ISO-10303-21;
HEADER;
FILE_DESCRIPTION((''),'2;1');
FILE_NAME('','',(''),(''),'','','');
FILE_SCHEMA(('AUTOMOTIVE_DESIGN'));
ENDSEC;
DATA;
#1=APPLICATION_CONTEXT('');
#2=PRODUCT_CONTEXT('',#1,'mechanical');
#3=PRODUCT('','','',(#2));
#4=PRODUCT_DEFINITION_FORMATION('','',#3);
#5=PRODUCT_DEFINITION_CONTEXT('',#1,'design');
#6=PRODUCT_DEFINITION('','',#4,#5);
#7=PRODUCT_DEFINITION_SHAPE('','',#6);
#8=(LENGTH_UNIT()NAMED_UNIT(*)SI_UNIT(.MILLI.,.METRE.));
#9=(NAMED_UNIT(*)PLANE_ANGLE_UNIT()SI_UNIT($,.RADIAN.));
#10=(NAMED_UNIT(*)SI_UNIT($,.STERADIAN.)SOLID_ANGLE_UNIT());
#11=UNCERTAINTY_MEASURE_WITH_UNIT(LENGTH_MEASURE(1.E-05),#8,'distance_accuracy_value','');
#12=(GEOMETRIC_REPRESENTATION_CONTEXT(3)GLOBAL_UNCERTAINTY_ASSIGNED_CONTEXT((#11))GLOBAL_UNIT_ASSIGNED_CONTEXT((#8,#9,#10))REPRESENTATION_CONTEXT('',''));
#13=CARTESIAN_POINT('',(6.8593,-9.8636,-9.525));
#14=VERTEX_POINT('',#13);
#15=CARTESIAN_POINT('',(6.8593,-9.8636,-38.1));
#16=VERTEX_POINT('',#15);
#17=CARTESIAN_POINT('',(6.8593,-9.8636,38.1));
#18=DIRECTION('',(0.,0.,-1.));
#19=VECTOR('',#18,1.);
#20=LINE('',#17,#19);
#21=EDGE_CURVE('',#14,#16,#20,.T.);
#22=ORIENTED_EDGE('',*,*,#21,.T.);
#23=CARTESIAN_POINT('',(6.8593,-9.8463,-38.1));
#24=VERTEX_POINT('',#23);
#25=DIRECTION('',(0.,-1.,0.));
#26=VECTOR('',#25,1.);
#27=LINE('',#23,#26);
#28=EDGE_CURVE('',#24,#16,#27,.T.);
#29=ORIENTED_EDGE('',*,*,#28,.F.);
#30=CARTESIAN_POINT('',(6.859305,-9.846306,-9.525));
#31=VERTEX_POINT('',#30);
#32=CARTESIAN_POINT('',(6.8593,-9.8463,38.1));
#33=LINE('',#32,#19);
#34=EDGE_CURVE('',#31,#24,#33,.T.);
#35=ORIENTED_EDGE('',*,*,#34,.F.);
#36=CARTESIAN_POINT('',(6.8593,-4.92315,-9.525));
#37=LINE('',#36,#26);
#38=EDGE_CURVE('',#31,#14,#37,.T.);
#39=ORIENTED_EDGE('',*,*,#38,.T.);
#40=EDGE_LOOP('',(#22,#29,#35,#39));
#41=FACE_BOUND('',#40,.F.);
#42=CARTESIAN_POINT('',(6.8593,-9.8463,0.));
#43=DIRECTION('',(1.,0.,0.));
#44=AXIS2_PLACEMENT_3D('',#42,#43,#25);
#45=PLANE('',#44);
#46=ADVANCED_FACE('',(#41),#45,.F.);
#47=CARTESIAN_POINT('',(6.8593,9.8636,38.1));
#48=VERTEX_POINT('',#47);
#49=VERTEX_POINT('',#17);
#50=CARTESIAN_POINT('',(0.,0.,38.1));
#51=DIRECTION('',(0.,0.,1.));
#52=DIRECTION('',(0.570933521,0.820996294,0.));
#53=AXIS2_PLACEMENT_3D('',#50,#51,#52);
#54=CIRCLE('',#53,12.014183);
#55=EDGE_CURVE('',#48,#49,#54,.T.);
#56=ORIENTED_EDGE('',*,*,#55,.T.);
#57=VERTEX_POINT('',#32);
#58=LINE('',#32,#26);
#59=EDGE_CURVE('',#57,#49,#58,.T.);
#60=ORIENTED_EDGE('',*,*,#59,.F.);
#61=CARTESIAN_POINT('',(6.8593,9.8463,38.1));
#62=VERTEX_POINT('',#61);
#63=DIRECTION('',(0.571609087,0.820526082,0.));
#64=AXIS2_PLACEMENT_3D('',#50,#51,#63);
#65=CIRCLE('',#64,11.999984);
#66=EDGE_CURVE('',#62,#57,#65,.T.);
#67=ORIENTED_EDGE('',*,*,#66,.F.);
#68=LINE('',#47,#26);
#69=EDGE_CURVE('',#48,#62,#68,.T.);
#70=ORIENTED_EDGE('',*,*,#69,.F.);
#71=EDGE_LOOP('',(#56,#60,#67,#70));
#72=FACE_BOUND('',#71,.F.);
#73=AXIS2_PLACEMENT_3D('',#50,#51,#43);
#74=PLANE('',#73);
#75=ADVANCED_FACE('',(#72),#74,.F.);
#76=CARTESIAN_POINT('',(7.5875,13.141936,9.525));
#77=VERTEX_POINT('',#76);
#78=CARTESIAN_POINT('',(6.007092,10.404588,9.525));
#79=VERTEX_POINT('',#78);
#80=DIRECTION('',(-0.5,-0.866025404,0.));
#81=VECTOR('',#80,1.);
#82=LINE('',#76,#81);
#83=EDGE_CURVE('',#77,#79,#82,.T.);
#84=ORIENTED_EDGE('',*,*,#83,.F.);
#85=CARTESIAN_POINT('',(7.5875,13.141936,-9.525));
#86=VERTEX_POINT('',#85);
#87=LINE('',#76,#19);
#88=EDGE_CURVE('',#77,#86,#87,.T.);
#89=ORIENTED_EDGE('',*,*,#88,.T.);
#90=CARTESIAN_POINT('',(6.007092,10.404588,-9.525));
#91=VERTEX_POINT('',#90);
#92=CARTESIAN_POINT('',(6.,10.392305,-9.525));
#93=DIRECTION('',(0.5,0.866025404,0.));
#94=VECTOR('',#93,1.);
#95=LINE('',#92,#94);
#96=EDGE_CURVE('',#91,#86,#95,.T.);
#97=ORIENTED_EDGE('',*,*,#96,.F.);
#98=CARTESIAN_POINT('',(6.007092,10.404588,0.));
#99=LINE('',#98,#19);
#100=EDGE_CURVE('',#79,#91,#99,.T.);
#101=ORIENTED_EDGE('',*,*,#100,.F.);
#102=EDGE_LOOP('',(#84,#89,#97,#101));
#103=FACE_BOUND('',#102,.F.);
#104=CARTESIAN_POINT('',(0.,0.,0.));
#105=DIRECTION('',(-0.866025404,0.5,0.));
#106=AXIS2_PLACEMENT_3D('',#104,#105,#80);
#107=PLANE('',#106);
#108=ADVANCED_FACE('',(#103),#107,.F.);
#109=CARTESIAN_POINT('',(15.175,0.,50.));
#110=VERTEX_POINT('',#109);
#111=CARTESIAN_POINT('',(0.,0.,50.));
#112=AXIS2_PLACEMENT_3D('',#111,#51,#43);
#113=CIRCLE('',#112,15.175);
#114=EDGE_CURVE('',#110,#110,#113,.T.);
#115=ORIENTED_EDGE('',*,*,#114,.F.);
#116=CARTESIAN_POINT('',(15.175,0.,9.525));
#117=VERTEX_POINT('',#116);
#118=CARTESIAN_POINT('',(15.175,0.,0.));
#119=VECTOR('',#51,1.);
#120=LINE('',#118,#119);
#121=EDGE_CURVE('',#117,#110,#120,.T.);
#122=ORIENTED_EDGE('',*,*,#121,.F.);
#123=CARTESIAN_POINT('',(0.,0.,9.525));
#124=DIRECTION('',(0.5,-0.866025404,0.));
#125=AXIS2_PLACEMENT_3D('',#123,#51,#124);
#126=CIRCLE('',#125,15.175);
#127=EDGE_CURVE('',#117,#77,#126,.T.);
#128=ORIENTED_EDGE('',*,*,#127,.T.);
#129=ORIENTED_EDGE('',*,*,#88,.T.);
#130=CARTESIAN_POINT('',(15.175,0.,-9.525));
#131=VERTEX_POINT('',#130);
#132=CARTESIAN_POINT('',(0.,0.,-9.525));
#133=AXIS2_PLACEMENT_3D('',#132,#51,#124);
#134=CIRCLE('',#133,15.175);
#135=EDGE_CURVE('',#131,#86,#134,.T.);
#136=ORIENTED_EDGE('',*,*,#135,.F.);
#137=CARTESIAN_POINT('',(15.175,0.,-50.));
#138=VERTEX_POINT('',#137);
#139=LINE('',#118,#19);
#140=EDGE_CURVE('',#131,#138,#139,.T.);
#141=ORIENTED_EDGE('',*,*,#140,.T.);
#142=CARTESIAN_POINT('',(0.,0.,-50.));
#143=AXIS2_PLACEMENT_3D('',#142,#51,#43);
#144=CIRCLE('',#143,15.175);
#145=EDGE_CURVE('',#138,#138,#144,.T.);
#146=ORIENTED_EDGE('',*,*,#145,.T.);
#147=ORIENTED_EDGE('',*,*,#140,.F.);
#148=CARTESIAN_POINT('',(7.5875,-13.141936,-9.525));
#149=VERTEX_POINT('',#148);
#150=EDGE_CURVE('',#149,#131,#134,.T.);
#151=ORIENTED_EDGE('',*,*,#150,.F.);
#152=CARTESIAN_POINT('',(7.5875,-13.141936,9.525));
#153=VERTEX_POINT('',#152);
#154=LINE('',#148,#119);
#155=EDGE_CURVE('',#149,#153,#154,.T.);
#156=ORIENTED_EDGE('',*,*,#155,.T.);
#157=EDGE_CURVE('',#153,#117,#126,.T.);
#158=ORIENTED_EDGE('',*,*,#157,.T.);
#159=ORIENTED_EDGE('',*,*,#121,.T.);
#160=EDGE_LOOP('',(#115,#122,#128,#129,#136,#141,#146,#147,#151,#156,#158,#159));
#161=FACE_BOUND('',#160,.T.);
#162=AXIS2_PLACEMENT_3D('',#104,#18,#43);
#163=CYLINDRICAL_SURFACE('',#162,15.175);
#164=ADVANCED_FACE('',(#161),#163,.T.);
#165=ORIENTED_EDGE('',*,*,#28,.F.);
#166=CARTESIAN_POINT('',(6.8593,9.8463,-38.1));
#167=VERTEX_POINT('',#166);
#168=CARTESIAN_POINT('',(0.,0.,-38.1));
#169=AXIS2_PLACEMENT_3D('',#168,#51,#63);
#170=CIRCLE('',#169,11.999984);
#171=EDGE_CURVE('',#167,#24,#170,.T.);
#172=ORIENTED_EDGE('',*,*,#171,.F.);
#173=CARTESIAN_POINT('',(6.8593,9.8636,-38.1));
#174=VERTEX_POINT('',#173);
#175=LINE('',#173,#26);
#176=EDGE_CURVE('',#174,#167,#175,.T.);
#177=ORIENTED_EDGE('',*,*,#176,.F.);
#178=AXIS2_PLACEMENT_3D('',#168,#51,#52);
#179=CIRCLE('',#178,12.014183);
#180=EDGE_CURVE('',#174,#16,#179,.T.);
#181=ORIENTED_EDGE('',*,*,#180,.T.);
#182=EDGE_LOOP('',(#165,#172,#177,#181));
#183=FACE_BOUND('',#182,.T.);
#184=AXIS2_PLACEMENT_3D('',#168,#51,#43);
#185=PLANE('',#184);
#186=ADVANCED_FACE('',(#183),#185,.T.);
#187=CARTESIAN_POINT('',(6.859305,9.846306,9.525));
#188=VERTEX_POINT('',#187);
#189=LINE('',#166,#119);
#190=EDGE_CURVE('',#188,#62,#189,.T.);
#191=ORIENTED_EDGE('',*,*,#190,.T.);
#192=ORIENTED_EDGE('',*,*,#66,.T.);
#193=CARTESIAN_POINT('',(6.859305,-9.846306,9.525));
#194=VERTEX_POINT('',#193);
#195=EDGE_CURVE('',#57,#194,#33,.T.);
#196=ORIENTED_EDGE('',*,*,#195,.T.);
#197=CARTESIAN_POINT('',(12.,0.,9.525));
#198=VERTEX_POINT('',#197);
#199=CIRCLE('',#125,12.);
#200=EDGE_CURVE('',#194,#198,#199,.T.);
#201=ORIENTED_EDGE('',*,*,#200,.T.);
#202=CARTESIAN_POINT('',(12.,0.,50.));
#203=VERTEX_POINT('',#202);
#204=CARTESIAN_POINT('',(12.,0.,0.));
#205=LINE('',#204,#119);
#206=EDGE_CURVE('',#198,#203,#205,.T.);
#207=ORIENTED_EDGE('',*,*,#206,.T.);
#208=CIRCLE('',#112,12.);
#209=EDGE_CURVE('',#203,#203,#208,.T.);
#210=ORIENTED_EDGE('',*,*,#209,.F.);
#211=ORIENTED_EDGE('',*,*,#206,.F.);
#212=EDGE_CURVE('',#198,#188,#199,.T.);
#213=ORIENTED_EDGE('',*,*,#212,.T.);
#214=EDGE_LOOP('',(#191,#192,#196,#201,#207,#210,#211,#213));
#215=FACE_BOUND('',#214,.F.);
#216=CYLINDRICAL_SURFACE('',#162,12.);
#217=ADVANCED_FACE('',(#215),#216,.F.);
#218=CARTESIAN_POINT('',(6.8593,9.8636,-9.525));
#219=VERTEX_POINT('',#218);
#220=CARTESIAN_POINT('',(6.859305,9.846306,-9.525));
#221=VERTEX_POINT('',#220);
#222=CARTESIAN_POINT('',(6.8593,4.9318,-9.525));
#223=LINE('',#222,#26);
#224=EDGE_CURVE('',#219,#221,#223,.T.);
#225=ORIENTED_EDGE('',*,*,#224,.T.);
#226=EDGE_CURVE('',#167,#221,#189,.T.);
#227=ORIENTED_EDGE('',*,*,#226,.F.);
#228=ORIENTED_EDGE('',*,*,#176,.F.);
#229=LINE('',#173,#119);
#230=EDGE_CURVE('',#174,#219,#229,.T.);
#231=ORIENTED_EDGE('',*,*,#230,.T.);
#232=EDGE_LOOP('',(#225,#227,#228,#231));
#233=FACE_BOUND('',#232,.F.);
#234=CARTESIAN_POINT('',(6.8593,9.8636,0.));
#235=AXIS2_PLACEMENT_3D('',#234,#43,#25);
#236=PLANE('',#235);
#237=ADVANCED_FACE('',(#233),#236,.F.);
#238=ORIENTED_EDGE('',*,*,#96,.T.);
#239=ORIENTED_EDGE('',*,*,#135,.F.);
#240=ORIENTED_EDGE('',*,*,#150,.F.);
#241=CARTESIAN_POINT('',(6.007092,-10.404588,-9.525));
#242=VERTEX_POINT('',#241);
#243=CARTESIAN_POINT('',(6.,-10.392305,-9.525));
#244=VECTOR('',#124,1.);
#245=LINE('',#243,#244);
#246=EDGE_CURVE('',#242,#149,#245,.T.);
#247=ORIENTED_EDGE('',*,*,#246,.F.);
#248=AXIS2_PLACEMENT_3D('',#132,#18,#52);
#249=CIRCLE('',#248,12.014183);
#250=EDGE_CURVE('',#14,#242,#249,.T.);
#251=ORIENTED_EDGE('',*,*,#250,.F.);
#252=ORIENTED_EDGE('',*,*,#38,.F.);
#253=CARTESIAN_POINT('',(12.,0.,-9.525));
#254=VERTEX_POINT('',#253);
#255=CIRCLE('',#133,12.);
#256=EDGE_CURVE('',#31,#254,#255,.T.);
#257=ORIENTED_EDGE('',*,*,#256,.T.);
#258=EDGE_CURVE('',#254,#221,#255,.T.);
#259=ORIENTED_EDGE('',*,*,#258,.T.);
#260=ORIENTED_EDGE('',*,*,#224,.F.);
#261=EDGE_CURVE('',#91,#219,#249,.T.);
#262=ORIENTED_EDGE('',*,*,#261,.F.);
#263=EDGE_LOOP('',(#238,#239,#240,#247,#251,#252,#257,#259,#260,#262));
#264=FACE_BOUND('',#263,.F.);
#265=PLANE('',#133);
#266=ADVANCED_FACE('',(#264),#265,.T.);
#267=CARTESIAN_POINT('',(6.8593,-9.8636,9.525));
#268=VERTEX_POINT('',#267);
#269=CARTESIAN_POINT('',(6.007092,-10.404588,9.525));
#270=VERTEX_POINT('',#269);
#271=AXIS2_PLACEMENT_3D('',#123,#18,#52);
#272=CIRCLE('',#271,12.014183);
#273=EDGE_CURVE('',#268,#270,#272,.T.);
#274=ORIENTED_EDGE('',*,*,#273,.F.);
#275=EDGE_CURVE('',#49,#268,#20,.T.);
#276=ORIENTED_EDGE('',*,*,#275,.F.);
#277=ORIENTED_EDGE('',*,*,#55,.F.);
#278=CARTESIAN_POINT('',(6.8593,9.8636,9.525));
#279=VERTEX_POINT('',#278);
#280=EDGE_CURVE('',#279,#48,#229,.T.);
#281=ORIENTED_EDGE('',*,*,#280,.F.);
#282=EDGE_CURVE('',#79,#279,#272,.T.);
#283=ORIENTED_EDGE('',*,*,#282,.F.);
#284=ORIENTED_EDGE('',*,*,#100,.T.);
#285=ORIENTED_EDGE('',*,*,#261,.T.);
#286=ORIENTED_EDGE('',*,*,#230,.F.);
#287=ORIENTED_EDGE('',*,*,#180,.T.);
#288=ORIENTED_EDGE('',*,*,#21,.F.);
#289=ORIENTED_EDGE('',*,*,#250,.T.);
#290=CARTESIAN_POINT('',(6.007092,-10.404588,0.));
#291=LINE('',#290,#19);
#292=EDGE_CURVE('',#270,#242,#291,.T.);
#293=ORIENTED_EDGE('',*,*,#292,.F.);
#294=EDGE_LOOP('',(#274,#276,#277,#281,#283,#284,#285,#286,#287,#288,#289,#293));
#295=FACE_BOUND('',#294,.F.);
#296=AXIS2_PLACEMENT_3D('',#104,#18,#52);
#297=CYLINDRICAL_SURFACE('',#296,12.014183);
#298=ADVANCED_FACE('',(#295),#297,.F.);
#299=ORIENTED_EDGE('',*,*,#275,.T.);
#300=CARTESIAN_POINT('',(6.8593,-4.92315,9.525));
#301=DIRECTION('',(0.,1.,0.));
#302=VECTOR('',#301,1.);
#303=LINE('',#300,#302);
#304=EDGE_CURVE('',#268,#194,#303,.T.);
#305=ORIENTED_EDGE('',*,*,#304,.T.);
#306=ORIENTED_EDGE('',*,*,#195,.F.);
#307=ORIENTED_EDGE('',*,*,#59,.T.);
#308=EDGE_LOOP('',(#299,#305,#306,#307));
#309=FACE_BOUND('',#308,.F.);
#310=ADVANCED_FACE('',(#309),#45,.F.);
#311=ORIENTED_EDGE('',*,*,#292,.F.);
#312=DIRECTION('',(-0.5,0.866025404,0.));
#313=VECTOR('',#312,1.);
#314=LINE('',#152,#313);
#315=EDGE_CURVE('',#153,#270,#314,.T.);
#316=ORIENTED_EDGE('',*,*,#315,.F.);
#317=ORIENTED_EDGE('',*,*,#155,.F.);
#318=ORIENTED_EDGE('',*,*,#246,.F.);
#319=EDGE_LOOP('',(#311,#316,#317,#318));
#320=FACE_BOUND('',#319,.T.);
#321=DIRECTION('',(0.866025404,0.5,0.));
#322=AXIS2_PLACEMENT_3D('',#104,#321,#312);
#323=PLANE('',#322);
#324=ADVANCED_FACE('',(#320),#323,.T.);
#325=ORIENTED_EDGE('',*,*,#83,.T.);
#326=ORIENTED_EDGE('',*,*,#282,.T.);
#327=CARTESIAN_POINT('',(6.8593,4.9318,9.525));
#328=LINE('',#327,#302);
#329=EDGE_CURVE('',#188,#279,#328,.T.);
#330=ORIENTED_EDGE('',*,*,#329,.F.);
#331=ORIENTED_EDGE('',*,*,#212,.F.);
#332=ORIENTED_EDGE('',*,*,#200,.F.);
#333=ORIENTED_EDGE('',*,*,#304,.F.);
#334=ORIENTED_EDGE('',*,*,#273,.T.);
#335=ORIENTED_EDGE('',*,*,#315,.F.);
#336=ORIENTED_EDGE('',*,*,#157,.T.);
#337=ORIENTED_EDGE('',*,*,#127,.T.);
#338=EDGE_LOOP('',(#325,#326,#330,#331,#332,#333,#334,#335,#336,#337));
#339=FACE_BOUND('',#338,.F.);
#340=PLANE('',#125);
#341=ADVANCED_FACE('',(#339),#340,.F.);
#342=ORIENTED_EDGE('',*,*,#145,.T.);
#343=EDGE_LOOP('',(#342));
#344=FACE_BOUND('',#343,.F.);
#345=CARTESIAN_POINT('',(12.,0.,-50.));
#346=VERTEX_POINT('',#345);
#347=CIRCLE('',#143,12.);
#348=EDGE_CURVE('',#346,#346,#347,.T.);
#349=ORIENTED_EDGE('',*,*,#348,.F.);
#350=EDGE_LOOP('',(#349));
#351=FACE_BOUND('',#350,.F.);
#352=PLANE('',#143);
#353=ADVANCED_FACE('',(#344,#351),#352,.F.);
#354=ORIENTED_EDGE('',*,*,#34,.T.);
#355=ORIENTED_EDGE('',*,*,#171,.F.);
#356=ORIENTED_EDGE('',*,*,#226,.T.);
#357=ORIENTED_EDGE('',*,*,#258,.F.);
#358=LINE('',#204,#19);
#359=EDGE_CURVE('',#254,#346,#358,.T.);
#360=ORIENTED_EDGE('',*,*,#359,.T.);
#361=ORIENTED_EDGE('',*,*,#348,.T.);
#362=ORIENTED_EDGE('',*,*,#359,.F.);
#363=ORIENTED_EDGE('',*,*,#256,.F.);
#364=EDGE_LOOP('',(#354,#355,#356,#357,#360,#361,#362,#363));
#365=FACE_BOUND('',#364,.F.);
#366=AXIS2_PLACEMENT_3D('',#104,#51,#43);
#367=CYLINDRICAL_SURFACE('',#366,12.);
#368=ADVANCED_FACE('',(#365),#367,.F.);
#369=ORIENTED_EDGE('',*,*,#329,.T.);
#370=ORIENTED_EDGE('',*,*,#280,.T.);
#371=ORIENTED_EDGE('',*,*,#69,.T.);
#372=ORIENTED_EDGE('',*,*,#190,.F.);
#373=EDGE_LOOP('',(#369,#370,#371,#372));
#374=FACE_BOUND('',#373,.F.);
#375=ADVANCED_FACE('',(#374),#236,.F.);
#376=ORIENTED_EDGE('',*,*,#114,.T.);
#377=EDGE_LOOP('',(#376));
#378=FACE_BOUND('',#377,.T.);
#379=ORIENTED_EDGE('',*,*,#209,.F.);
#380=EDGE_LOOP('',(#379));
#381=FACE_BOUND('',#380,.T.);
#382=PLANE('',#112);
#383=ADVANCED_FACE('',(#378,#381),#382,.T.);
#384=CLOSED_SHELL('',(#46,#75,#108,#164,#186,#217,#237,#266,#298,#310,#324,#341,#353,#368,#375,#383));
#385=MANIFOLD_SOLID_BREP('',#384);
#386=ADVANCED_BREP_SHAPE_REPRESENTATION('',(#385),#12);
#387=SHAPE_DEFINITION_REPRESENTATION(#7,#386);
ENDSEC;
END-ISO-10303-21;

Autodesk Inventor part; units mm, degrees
ref_plane "YZ Plane" through (0, 0, 0) normal (1, 0, 0) x (0, 1, 0)
ref_plane "XZ Plane" through (0, 0, 0) normal (0, 1, 0) x (-1, 0, 0)
ref_plane "XY Plane" through (0, 0, 0) normal (0, 0, 1) x (1, 0, 0)
sketch "Sketch1" plane through (0, 0, 0) normal (0, 0, 1) x (1, 0, 0)
  circle A0 centre (0, 0) radius 12
  circle A1 centre (0, 0) radius 15.175
  dimension "d0" = 24
  dimension "d1" = 3.175
extrude "Extrusion1" add sketch "Sketch1" along normal mid plane 100
sketch "Sketch2" plane through (0, 0, 0) normal (0, 1, 0) x (-1, 0, 0)
  line L0 (15.175, -50) -> (15.175, 50) projected
  line L1 (-12, -50) -> (-12, 50) projected
  line L2 (-15.175, -50) -> (-15.175, 50) projected
  line L3 (15.175, 12.7) -> (15.175, -12.7)
  line L4 (0, -70) -> (0, 70) projected
  line L5 (-12, -50) -> (-12, 50) projected
  line L6 (-12, -9.525) -> (-15.175, -9.525)
  line L7 (-15.175, -9.525) -> (-15.175, 9.525)
  line L8 (-15.175, 9.525) -> (-12, 9.525)
  line L9 (-12, 9.525) -> (-12, -9.525)
  point P0 (0, 0)
  point P1 (12, 0)
  point P2 (-12, 0)
  dimension "d6" = 19.05
revolve "Revolution1" cut sketch "Sketch2" angle 120 mid plane about axis through (0, 0, -10) along (0, 0, 1)
sketch "Sketch4" plane through (0, 0, 0) normal (0, 0, 1) x (1, 0, 0)
  arc A0 (6.8593, 9.8463) -> (6.8593, -9.8463) centre (0, 0) ccw
  arc A1 (6.8593, 9.8636) -> (6.8593, -9.8636) centre (0, 0) ccw
  line L0 (6.8593, 9.8636) -> (6.8593, 9.8463)
  line L1 (6.8593, -9.8463) -> (6.8593, -9.8636)
  dimension "d9" = 24.0284
extrude "Extrusion2" cut sketch "Sketch4" along normal mid plane 76.2
properties part number "DPLX_P033_SG_Viton rubber Cover" material "Rubber, Silicone"
